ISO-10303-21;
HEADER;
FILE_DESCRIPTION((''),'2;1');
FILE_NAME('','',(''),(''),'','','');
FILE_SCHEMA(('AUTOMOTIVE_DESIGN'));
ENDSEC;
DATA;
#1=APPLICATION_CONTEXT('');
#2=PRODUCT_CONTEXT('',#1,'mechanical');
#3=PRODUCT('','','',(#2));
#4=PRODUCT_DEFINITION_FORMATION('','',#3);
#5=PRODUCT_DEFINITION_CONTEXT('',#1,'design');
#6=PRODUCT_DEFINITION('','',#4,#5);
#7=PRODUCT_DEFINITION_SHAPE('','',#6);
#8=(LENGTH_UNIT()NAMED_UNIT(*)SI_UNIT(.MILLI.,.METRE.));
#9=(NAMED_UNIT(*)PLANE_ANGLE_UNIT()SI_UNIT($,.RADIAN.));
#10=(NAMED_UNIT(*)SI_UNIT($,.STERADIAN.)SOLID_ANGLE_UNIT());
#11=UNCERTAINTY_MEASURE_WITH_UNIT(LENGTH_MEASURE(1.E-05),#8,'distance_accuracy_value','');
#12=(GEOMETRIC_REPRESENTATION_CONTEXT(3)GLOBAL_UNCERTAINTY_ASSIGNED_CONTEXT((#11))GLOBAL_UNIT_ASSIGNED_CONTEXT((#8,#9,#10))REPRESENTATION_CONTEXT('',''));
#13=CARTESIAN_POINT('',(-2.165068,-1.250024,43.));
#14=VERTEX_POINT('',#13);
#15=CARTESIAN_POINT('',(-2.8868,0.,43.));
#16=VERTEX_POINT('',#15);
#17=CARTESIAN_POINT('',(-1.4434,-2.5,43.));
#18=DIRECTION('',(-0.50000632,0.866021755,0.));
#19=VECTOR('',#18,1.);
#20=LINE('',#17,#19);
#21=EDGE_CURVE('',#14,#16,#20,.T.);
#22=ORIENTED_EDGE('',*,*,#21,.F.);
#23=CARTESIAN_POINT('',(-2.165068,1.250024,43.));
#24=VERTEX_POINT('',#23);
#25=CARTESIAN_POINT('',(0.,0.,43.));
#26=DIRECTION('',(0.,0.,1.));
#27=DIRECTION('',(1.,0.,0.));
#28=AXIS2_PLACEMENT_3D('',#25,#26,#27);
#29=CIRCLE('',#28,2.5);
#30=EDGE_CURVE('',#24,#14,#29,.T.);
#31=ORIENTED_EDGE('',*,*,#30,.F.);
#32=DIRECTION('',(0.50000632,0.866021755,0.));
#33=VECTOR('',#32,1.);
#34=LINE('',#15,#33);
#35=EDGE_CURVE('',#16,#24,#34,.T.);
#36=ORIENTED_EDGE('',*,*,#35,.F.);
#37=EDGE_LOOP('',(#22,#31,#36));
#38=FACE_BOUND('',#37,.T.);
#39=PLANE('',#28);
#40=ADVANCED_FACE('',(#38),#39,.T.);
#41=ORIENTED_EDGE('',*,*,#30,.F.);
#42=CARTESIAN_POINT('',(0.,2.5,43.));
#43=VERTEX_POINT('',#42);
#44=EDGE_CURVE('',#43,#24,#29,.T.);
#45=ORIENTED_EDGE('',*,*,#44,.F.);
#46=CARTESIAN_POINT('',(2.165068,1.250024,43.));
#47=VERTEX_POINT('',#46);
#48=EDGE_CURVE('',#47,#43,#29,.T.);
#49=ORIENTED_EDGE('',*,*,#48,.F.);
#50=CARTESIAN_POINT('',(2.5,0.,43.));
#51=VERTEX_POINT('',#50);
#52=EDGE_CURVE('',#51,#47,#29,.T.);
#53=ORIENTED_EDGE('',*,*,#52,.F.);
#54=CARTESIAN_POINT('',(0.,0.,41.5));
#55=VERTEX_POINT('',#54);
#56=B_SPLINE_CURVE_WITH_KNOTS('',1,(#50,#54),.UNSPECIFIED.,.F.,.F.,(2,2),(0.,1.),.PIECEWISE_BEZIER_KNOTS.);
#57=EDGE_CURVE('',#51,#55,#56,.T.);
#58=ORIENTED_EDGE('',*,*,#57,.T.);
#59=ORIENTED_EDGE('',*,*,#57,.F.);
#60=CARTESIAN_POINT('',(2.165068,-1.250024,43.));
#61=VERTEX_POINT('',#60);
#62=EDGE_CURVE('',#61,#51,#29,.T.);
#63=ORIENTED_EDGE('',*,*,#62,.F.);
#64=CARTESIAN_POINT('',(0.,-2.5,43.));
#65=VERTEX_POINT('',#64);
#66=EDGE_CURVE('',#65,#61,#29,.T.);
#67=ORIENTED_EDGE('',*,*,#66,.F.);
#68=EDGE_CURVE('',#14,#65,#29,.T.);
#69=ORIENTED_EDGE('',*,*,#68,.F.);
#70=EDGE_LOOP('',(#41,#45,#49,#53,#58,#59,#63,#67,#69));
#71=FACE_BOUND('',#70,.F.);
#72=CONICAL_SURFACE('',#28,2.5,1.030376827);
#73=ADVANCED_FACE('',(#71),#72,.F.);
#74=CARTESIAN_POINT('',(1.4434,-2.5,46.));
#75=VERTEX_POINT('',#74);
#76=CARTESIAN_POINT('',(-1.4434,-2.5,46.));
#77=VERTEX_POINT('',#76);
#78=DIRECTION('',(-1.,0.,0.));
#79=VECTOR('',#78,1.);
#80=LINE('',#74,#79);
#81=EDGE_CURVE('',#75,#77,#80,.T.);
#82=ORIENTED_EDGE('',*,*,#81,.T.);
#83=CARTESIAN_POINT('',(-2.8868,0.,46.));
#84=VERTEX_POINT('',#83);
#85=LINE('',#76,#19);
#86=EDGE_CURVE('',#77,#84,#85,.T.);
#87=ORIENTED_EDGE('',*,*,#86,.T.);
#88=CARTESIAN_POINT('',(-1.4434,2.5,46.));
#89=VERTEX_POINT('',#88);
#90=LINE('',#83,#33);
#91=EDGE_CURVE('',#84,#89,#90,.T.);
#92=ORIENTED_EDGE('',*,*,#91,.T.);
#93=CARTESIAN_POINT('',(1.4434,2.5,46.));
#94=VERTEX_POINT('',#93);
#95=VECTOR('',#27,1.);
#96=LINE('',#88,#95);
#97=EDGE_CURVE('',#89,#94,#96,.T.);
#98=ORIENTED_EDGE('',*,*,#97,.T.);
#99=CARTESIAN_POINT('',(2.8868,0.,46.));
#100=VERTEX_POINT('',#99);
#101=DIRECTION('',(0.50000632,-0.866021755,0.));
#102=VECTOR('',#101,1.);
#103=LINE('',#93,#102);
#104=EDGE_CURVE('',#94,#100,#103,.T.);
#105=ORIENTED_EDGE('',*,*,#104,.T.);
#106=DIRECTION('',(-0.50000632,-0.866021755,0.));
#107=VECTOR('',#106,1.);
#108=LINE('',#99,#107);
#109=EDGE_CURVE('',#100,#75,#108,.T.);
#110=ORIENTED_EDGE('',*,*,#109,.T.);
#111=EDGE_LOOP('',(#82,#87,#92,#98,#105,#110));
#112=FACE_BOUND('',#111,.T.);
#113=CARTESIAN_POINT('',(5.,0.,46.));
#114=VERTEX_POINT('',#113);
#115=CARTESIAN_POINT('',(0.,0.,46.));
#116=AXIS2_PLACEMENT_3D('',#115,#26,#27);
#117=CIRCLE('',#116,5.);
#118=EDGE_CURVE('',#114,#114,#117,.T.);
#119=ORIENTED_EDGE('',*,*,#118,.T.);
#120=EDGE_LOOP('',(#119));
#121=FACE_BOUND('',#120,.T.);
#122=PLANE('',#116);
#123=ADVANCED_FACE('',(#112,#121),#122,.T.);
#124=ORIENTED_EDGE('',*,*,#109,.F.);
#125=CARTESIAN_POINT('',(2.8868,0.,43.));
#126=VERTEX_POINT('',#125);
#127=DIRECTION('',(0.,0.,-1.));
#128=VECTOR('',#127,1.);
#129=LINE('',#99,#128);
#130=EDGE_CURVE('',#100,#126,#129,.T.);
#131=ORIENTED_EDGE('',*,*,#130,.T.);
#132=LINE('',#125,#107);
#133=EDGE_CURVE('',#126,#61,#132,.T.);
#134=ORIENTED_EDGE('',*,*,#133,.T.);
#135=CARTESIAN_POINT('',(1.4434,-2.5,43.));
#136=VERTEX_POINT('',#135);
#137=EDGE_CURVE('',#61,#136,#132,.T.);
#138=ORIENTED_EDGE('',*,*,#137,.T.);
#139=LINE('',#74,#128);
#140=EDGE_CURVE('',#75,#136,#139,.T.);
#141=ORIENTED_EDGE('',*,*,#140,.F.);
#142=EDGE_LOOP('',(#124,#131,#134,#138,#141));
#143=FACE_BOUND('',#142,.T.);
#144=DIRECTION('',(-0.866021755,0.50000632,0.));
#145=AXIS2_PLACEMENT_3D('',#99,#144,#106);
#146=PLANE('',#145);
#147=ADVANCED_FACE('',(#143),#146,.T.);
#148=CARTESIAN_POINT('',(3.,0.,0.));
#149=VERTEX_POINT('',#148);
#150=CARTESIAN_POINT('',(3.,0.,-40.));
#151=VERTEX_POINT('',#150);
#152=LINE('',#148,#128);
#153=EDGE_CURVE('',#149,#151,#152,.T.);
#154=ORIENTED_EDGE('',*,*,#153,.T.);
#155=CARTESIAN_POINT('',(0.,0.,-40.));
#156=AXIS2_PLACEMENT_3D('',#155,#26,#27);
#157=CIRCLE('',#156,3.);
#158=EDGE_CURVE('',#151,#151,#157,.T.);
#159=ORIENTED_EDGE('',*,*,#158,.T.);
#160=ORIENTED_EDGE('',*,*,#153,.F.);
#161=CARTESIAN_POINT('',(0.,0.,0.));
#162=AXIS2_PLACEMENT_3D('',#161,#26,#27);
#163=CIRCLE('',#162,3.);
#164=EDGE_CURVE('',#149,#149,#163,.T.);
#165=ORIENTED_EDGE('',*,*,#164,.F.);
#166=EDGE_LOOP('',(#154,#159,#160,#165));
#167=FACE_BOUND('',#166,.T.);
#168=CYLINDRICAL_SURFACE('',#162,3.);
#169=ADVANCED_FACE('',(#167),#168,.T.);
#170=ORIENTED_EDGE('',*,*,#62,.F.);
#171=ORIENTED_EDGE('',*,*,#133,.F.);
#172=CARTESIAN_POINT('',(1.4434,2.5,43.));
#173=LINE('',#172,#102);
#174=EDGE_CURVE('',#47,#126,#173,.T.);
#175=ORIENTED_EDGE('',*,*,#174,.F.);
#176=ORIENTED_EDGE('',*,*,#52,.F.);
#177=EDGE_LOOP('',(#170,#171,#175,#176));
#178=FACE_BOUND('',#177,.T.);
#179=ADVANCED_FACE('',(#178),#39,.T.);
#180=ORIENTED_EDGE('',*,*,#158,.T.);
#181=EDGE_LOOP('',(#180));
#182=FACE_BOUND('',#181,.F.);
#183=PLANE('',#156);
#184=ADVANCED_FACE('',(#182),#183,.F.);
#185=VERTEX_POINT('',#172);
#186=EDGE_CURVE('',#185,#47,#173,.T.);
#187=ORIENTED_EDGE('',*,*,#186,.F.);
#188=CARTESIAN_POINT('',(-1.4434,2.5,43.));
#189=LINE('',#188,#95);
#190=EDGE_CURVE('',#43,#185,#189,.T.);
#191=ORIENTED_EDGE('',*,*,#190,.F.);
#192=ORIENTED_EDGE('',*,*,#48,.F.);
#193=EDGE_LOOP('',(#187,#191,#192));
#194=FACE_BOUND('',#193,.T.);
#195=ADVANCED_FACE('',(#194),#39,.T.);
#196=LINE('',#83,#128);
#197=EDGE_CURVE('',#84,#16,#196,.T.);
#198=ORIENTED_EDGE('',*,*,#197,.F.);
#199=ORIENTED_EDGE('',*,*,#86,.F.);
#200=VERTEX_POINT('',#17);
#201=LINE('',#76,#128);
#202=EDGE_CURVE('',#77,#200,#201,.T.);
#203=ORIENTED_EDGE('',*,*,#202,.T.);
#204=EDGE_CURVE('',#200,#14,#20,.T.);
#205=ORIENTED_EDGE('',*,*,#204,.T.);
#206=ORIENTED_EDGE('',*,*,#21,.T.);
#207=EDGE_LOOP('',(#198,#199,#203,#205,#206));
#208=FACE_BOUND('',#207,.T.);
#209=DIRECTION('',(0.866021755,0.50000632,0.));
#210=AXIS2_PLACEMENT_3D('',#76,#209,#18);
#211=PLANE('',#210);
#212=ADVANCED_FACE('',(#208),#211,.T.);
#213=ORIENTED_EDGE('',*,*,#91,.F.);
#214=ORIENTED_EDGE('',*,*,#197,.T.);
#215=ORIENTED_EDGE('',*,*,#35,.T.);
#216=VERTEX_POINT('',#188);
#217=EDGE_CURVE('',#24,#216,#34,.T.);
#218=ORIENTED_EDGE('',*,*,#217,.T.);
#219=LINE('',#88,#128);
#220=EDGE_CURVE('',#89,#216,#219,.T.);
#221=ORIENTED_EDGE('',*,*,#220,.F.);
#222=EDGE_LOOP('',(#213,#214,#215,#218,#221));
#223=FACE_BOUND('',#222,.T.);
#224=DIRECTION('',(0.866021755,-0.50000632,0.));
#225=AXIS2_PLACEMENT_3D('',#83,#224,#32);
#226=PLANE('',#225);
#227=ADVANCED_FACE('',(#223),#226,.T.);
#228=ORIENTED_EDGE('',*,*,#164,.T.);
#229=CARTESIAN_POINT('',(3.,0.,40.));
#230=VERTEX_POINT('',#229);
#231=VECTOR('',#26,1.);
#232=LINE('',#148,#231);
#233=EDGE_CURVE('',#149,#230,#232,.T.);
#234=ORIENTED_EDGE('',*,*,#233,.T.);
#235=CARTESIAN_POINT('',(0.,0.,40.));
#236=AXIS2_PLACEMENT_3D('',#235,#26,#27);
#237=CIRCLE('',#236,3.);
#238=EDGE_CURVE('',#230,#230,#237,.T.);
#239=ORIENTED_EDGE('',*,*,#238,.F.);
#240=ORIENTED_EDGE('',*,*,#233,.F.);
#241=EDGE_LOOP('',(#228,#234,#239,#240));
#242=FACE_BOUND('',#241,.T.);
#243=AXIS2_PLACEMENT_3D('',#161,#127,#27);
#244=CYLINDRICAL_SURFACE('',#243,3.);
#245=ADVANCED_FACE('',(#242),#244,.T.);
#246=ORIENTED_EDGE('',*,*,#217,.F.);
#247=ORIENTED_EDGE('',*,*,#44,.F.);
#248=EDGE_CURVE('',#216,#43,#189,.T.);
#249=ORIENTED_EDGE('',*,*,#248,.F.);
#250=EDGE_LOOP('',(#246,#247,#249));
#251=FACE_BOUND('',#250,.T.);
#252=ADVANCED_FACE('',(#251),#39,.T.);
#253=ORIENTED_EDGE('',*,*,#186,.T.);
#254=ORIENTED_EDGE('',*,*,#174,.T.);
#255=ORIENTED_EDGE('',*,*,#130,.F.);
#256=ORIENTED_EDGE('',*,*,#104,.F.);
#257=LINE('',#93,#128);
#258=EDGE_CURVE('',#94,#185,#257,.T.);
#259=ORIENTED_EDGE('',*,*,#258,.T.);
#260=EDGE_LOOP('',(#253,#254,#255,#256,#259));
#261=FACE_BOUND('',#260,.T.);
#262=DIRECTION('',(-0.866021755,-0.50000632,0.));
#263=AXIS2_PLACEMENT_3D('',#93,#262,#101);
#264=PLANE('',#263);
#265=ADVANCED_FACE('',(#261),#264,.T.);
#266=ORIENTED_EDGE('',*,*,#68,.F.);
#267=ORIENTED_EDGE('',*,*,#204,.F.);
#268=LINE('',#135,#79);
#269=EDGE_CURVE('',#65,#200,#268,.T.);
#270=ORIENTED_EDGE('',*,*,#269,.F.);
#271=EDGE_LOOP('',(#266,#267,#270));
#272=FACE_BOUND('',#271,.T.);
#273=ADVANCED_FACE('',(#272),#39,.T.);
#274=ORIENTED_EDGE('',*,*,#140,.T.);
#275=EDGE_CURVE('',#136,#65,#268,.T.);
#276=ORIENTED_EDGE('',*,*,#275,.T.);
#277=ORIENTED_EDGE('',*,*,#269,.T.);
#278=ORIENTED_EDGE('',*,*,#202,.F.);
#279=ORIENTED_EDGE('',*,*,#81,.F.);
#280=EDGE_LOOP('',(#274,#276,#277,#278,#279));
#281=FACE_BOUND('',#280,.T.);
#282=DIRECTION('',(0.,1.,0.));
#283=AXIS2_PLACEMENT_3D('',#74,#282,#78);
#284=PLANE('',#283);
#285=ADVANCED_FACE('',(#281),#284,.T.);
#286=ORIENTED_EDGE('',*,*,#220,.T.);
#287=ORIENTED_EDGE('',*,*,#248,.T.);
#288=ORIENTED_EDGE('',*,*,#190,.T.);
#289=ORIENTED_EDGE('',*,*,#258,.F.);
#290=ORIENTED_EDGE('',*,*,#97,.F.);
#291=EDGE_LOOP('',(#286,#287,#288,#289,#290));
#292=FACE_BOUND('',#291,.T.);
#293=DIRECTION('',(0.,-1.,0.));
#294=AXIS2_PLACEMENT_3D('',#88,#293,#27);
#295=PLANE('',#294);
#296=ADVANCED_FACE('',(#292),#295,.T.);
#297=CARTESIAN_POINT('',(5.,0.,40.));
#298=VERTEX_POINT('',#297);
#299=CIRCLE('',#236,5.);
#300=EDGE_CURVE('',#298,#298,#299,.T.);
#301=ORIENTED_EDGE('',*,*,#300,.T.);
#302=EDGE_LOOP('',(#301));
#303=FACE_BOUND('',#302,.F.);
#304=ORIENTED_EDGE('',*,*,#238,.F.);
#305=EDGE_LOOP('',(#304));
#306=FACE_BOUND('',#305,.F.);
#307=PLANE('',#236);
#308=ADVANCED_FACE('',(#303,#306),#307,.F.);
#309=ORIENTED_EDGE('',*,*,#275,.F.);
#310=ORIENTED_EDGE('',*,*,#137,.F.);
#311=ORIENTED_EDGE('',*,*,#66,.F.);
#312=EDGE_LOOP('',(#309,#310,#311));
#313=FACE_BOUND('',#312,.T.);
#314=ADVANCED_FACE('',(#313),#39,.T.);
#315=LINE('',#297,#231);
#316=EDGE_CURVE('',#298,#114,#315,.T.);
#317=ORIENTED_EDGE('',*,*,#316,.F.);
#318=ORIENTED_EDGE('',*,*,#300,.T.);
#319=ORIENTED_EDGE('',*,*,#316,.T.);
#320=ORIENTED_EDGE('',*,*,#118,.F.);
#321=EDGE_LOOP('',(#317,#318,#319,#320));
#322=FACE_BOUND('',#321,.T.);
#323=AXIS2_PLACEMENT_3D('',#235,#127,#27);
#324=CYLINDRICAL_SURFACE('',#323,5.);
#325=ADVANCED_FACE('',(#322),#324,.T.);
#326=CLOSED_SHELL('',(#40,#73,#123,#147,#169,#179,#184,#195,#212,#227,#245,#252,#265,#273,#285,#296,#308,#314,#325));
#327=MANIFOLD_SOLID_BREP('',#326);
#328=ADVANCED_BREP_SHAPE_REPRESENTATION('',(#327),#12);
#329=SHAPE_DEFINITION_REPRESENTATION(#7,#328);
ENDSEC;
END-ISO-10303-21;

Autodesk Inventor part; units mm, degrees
ref_plane "YZ Plane" through (0, 0, 0) normal (1, 0, 0) x (0, 1, 0)
ref_plane "XZ Plane" through (0, 0, 0) normal (0, 1, 0) x (-1, 0, 0)
sketch "Sketch1" plane through (0, 0, 0) normal (0, 0, 1) x (1, 0, 0)
  circle A0 centre (0, 0) radius 3
  dimension "d0" = 6
extrude "Extrusion1" add sketch "Sketch1" along normal mid plane 80
sketch "Sketch2" plane through (0, 0, 40) normal (0, 0, 1) x (1, 0, 0)
  circle A0 centre (0, 0) radius 5
  dimension "d3" = 10
extrude "Extrusion2" add sketch "Sketch2" along normal blind 6
thread "Thread1" size "M6x1" class "6g" standard "ISO Metric profile" length 80
sketch "Sketch3" plane through (0, 0, 46) normal (0, 0, 1) x (1, 0, 0)
  circle A0 centre (0, 0) radius 3 projected
  line L0 (1.4434, 2.5) -> (2.8868, 0)
  line L1 (2.8868, 0) -> (1.4434, -2.5)
  line L2 (1.4434, -2.5) -> (-1.4434, -2.5)
  line L3 (-1.4434, -2.5) -> (-2.8868, 0)
  line L4 (-2.8868, 0) -> (-1.4434, 2.5)
  line L5 (-1.4434, 2.5) -> (1.4434, 2.5)
  dimension "d8" = 5
extrude "Extrusion3" cut sketch "Sketch3" against normal blind 3 contours L0 L1 L2 L3 L4 L5
ref_plane "Work Plane2" through (0, 0, 41.5) normal (0, 0, 1) x (1, 0, 0)
sketch "Sketch5" plane through (0, 0, 41.5) normal (0, 0, 1) x (1, 0, 0)
  point P0 (0, 0)
  point P1 (0, 0)
sketch "Sketch6" plane through (0, 0, 43) normal (0, 0, 1) x (1, 0, 0)
  circle A0 centre (0, 0) radius 2.5
  dimension "d13" = 5
loft "Loft1" cut profiles "Sketch6" section 2 point at (0, 0, 41.5)
properties part number "HCMUTE-CDT23-M6X80_SUOT" material "Stainless Steel"
